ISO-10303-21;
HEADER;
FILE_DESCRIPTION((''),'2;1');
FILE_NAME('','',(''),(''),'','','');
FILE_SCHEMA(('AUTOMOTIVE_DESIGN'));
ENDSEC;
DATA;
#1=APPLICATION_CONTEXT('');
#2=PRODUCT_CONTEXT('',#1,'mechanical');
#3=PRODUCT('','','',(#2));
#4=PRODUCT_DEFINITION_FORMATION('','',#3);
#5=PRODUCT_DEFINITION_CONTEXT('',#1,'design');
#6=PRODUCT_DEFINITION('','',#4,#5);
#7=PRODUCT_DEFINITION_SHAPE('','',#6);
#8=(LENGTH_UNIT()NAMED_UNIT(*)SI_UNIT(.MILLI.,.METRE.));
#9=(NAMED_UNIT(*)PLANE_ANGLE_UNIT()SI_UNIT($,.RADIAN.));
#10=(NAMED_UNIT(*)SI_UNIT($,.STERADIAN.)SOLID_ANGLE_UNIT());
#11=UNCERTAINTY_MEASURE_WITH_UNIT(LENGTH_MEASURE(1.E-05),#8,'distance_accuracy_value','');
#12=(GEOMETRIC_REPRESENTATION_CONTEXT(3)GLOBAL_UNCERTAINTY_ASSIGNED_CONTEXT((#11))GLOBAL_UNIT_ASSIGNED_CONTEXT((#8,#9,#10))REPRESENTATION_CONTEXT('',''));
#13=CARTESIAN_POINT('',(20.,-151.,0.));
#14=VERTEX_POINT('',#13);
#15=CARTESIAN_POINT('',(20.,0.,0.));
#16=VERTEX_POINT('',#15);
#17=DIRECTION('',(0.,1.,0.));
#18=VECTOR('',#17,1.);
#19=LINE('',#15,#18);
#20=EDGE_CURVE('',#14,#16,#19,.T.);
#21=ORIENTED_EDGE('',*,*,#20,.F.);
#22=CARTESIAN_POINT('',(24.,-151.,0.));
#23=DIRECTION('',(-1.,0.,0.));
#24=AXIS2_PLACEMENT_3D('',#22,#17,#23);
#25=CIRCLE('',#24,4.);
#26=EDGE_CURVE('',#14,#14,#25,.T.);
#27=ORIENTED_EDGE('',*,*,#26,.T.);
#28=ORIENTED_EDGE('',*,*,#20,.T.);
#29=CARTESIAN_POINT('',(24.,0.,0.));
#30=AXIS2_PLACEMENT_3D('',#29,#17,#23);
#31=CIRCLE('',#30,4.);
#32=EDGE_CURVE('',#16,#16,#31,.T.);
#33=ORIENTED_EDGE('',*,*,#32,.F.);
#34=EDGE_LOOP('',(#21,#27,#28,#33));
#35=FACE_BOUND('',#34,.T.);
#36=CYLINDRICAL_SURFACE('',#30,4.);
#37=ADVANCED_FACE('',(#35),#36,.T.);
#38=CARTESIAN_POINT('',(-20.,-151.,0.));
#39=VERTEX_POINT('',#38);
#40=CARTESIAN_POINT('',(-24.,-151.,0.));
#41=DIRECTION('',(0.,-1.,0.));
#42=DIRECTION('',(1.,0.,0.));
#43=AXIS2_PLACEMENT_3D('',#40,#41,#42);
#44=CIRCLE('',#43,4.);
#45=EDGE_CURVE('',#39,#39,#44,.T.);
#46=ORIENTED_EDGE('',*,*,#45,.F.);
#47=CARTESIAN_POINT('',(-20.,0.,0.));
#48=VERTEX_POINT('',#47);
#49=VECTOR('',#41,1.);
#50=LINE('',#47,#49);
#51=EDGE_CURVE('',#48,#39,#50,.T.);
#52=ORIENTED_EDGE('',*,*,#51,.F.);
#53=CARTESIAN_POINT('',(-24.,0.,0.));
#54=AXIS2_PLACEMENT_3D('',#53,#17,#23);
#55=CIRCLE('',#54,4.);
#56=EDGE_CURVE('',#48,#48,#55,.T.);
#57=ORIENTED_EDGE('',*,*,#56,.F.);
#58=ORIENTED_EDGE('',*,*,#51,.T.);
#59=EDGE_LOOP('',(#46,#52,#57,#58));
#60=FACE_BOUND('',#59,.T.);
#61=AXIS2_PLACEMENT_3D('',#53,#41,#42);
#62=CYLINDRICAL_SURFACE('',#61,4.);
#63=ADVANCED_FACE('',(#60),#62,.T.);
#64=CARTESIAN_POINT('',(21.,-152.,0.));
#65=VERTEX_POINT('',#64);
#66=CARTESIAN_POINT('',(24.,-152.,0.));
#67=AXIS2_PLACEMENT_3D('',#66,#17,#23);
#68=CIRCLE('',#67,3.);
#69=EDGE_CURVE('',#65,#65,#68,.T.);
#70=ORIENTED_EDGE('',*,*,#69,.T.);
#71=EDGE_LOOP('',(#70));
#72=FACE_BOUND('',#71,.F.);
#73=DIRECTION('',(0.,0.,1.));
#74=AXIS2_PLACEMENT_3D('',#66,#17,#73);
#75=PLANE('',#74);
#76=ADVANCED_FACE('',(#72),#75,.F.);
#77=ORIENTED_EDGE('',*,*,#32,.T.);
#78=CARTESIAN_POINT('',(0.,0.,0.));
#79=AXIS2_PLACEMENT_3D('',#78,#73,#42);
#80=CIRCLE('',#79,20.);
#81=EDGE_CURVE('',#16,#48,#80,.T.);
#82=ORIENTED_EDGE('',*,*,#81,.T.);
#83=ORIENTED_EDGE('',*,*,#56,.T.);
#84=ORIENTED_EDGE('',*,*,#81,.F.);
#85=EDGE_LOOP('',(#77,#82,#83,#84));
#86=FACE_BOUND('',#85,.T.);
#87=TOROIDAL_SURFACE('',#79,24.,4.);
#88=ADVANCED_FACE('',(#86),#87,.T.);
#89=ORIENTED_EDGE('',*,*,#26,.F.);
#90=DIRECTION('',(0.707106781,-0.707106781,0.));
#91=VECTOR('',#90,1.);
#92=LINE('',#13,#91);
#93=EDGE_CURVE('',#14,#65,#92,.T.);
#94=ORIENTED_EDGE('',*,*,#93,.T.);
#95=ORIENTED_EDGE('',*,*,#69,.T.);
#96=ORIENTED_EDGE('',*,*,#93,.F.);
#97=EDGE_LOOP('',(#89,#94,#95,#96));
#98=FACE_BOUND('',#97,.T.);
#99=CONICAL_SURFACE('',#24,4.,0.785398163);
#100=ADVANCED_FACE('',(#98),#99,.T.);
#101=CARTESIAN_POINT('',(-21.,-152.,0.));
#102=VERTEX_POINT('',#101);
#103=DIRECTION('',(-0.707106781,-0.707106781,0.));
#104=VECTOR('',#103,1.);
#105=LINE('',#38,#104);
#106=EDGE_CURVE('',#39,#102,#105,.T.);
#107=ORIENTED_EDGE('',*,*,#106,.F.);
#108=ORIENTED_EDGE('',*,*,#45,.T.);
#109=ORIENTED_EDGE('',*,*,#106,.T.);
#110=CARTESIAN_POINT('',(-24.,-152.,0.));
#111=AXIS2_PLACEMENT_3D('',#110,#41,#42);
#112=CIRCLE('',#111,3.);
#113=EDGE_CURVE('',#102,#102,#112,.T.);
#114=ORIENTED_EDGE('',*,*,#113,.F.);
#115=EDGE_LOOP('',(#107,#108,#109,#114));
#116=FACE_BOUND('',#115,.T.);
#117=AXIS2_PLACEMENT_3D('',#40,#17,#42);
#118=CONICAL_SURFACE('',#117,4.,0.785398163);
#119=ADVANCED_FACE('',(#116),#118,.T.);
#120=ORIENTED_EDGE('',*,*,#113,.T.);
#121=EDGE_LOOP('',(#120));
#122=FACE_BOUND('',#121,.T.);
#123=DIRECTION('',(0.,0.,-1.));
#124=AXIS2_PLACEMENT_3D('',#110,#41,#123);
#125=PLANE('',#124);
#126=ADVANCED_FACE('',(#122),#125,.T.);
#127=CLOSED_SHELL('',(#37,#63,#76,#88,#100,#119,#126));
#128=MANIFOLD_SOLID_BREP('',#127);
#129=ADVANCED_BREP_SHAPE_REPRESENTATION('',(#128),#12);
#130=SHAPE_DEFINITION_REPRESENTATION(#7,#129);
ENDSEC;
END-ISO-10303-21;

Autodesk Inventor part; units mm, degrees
ref_plane "YZ Plane" through (0, 0, 0) normal (1, 0, 0) x (0, 1, 0)
ref_plane "XZ Plane" through (0, 0, 0) normal (0, 1, 0) x (-1, 0, 0)
sketch "Sketch1" plane through (0, 0, 0) normal (0, 0, 1) x (1, 0, 0)
  arc A0 (24, 0) -> (-24, 0) centre (0, 0) ccw
  line L0 (-24, 0) -> (-24, -152)
  line L1 (24, 0) -> (24, -152)
  dimension "d0" = 48
  dimension "d1" = 152
ref_plane "Work Plane1" through (-24, -152, 0) normal (0, -1, 0) x (1, 0, 0)
sketch "Sketch2" plane through (-24, -152, 0) normal (0, -1, 0) x (1, 0, 0)
  circle A0 centre (0, 0) radius 4
  point P0 (24, 0)
  dimension "d2" = 8
sweep "Колебание1" add profiles "Sketch2" path "Sketch1"
thread "Резьба1"
thread "Резьба2"
chamfer "Фаска1" distance 1 angle 45 2 edges at (28, -152, 0) (-28, -152, 0)
equation "\"d0\" = D + d_"
equation "\"d1\" = -d_ + H_ - 0.5 * D"
equation "\"d2\" = d_"
equation "\"d4\" = l_"
equation "\"d11\" = l_"
equation "\"D\" = 40"
equation "\"A_\" = 136"
equation "\"d_\" = 8"
equation "\"l_\" = 60"
equation "\"H_\" = 180"
properties part number "Скоба 40x170 ГОСТ 24137-80" material "Сталь, мягкая"
